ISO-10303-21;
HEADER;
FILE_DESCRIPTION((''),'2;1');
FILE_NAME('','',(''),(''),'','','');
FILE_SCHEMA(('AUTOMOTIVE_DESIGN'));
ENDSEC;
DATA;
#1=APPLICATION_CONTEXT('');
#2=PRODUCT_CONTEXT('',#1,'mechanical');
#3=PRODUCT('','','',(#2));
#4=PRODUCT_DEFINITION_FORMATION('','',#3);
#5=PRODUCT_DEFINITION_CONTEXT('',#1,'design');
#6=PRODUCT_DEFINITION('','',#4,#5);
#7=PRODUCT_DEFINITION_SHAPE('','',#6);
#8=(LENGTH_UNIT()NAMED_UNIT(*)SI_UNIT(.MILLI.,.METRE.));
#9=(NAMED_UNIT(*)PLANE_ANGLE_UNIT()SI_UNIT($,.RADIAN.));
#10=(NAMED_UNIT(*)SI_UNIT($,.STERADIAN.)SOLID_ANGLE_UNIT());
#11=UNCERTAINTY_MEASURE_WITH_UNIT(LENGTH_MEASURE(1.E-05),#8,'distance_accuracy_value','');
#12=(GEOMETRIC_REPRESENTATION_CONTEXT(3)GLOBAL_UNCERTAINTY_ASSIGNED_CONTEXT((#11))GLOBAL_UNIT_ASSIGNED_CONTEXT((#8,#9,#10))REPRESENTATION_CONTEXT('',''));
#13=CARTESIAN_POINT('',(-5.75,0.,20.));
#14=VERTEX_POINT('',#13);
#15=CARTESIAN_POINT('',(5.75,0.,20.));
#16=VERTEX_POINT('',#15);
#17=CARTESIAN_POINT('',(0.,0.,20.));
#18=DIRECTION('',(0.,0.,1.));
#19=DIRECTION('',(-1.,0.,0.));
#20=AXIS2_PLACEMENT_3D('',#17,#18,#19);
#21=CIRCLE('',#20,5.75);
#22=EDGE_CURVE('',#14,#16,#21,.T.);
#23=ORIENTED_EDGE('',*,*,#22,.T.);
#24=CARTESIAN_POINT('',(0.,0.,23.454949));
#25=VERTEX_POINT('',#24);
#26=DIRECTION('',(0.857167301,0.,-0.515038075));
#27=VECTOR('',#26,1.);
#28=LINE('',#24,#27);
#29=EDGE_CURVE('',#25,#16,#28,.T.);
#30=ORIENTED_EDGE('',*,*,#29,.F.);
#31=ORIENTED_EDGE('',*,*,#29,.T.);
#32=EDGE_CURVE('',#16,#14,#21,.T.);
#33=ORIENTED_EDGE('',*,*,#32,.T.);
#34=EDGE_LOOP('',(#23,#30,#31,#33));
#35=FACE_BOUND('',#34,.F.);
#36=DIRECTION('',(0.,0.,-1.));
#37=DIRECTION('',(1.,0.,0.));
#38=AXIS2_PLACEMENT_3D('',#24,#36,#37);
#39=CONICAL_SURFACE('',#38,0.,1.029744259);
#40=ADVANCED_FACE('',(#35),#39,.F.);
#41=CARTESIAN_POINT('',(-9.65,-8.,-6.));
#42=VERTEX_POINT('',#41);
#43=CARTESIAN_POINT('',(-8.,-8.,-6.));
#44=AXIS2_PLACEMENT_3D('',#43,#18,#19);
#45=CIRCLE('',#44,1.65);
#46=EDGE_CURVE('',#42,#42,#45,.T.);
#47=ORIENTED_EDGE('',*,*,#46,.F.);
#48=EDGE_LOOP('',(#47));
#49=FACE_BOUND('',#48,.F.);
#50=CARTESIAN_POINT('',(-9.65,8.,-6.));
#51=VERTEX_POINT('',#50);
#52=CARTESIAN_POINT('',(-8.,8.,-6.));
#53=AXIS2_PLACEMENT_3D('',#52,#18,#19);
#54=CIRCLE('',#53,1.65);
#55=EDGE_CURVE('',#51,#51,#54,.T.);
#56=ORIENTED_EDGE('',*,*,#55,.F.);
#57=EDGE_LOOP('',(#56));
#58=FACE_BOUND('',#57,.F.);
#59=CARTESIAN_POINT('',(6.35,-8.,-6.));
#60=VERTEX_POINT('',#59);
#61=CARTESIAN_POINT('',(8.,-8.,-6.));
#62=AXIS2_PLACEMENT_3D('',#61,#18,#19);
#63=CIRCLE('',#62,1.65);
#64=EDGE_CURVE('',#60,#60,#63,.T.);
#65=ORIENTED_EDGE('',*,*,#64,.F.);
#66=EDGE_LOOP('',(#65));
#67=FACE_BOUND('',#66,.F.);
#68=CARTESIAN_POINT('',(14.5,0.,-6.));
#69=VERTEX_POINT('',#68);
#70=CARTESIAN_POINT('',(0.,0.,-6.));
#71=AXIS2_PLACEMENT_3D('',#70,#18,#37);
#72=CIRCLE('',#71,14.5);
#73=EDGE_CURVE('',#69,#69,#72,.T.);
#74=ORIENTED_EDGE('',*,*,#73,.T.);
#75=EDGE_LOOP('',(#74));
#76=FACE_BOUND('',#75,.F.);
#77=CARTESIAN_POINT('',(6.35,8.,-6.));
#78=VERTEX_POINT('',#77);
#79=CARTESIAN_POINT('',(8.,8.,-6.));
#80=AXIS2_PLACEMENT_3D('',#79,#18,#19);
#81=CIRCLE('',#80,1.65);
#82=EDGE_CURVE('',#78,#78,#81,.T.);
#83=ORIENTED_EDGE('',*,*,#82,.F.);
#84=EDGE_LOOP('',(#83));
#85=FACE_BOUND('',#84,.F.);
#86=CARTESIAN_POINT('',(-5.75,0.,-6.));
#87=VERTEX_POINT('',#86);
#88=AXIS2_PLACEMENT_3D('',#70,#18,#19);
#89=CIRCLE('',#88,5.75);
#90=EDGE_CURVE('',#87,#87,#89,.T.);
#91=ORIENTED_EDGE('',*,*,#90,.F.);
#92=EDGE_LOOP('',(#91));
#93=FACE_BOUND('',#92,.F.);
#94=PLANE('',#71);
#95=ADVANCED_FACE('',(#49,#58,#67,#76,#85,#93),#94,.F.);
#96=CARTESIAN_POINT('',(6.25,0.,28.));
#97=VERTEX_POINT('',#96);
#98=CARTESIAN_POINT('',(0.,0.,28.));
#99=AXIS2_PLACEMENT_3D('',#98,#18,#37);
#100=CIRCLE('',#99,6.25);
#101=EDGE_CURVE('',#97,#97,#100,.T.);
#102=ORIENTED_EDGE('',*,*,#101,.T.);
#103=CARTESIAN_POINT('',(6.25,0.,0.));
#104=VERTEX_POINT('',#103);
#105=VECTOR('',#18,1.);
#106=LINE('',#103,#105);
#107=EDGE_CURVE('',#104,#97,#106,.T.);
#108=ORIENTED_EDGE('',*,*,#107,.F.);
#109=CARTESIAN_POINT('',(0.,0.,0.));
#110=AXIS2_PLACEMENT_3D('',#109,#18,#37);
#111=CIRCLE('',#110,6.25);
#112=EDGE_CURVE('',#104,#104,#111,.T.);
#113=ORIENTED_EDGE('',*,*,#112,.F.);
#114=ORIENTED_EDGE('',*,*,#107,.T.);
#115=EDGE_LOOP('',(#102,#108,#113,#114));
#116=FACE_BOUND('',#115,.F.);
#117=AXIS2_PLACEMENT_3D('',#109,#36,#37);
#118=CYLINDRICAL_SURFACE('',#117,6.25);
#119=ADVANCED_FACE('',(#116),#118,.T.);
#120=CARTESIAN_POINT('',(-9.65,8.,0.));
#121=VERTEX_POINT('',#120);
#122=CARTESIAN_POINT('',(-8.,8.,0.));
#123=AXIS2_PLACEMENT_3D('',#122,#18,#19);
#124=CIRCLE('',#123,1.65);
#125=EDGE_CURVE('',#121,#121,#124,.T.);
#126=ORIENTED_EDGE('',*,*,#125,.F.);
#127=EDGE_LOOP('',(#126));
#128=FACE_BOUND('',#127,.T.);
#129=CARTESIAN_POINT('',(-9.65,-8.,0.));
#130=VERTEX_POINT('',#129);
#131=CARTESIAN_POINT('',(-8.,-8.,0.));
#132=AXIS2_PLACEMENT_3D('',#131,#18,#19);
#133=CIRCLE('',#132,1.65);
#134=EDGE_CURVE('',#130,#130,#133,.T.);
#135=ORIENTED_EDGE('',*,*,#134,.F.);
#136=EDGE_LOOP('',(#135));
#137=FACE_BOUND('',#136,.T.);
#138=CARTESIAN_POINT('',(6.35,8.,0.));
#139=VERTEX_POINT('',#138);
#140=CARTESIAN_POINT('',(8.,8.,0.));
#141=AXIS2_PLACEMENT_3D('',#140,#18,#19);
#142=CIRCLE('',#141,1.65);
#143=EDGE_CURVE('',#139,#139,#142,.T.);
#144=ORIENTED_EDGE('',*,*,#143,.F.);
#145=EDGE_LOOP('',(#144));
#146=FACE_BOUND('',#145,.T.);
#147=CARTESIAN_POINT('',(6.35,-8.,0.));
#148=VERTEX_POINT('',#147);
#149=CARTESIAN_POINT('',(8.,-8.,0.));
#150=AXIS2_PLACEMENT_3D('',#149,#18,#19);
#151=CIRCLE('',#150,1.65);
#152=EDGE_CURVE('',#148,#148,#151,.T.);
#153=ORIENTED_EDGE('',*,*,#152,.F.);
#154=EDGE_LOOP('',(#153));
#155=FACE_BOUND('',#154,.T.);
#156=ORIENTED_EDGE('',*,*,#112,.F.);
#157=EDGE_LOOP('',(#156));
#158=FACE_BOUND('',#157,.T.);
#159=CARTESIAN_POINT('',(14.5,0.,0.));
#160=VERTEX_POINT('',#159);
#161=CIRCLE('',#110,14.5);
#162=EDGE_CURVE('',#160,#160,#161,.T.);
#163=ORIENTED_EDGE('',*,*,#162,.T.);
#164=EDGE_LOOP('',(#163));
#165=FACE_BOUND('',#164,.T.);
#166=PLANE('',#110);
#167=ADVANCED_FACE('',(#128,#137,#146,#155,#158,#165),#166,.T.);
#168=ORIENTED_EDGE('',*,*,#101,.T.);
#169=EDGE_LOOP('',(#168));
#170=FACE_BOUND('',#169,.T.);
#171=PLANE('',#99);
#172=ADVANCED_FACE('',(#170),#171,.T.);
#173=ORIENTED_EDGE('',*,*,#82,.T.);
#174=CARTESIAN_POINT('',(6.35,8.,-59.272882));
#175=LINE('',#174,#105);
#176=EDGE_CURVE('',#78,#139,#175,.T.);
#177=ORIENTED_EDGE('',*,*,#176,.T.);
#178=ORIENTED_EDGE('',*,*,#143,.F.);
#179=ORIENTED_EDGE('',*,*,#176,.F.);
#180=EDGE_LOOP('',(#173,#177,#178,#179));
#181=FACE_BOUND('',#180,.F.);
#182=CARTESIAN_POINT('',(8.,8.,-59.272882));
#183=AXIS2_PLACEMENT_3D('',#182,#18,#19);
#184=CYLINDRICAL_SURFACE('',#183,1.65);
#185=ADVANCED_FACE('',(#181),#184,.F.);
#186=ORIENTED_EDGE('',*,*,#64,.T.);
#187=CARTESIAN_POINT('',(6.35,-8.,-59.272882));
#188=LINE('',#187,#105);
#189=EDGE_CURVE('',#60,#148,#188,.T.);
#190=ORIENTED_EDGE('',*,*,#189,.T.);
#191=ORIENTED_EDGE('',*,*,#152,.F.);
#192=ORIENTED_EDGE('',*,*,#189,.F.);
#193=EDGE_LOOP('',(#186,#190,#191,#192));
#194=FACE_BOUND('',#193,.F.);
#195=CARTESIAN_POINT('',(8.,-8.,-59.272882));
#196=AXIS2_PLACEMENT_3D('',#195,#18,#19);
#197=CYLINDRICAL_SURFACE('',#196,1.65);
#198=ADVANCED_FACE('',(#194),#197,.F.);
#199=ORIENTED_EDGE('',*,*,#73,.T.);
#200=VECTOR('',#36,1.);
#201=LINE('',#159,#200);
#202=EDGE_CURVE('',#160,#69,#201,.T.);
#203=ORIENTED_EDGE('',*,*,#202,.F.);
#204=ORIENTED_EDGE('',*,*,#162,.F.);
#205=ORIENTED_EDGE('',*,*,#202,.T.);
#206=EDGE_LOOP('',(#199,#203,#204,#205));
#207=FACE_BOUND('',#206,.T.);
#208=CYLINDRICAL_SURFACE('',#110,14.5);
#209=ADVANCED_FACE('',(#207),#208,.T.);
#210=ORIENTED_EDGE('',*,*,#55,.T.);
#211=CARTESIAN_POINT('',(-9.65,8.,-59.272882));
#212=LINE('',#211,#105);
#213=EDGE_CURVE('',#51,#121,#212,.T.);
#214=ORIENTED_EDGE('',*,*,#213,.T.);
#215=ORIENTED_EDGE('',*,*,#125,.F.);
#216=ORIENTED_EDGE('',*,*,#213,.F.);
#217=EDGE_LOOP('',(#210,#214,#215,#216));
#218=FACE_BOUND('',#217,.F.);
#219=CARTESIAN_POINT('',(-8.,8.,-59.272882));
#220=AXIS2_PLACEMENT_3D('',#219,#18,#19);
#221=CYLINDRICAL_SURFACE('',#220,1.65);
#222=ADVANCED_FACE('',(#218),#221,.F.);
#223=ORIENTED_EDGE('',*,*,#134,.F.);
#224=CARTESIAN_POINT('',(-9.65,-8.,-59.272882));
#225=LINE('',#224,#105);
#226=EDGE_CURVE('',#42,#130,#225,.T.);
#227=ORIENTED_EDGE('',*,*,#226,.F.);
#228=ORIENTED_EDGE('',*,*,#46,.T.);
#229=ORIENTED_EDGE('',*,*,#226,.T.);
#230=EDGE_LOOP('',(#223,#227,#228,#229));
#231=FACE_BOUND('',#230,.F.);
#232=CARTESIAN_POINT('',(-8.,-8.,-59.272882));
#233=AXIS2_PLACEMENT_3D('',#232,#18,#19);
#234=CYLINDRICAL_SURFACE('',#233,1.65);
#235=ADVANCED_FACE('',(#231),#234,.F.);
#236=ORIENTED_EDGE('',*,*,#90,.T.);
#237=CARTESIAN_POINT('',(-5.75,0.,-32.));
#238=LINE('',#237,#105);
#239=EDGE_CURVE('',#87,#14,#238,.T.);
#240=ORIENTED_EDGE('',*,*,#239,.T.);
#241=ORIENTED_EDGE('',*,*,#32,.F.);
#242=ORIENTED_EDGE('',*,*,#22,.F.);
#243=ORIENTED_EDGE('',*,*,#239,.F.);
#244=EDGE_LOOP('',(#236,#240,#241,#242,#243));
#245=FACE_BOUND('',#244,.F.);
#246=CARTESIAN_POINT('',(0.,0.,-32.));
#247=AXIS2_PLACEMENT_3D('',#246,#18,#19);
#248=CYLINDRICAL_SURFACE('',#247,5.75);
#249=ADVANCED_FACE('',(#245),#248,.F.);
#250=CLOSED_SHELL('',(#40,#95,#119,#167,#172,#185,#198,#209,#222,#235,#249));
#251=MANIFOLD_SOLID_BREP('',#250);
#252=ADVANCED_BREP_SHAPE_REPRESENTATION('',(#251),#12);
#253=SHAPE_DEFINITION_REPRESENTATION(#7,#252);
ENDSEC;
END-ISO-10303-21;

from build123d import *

# Parameters (mm, degrees)
F0_R     = 14.5
F0_R_2   = 6.25
F1_DEPTH = 6
F2_DEPTH = 28
F4_D     = 3.3
F5_D     = 11.5
F5_DEPTH = 26
F5_TIP   = 3.4549485594


with BuildPart() as f1:
    # F0 (on Top) → F1 (new body)
    with BuildSketch(Plane.XY):
        Circle(F0_R)
        Circle(F0_R_2, mode=Mode.SUBTRACT)
        Circle(F0_R_2)
    extrude(amount=-F1_DEPTH)

    # F0 (on Top) → F2 (join)
    with BuildSketch(Plane.XY):
        Circle(F0_R_2)
    extrude(amount=F2_DEPTH)

    # F4 (through all)
    with Locations(Plane(origin=(0, 0, -6), x_dir=(1, 0, 0), z_dir=(0, 0, -1))):
        with Locations((8, 8), (8, -8), (-8, -8), (-8, 8)):
            Hole(F4_D / 2)

    # F5
    with Locations(Plane(origin=(0, 0, -6), x_dir=(1, 0, 0), z_dir=(0, 0, -1))):
        with Locations((0, 0)):
            Hole(F5_D / 2, depth=F5_DEPTH)
            with Locations((0, 0, -(F5_DEPTH + F5_TIP / 2))):  # 118° drill point
                Cone(0, F5_D / 2, F5_TIP, mode=Mode.SUBTRACT)


solid = f1.part
